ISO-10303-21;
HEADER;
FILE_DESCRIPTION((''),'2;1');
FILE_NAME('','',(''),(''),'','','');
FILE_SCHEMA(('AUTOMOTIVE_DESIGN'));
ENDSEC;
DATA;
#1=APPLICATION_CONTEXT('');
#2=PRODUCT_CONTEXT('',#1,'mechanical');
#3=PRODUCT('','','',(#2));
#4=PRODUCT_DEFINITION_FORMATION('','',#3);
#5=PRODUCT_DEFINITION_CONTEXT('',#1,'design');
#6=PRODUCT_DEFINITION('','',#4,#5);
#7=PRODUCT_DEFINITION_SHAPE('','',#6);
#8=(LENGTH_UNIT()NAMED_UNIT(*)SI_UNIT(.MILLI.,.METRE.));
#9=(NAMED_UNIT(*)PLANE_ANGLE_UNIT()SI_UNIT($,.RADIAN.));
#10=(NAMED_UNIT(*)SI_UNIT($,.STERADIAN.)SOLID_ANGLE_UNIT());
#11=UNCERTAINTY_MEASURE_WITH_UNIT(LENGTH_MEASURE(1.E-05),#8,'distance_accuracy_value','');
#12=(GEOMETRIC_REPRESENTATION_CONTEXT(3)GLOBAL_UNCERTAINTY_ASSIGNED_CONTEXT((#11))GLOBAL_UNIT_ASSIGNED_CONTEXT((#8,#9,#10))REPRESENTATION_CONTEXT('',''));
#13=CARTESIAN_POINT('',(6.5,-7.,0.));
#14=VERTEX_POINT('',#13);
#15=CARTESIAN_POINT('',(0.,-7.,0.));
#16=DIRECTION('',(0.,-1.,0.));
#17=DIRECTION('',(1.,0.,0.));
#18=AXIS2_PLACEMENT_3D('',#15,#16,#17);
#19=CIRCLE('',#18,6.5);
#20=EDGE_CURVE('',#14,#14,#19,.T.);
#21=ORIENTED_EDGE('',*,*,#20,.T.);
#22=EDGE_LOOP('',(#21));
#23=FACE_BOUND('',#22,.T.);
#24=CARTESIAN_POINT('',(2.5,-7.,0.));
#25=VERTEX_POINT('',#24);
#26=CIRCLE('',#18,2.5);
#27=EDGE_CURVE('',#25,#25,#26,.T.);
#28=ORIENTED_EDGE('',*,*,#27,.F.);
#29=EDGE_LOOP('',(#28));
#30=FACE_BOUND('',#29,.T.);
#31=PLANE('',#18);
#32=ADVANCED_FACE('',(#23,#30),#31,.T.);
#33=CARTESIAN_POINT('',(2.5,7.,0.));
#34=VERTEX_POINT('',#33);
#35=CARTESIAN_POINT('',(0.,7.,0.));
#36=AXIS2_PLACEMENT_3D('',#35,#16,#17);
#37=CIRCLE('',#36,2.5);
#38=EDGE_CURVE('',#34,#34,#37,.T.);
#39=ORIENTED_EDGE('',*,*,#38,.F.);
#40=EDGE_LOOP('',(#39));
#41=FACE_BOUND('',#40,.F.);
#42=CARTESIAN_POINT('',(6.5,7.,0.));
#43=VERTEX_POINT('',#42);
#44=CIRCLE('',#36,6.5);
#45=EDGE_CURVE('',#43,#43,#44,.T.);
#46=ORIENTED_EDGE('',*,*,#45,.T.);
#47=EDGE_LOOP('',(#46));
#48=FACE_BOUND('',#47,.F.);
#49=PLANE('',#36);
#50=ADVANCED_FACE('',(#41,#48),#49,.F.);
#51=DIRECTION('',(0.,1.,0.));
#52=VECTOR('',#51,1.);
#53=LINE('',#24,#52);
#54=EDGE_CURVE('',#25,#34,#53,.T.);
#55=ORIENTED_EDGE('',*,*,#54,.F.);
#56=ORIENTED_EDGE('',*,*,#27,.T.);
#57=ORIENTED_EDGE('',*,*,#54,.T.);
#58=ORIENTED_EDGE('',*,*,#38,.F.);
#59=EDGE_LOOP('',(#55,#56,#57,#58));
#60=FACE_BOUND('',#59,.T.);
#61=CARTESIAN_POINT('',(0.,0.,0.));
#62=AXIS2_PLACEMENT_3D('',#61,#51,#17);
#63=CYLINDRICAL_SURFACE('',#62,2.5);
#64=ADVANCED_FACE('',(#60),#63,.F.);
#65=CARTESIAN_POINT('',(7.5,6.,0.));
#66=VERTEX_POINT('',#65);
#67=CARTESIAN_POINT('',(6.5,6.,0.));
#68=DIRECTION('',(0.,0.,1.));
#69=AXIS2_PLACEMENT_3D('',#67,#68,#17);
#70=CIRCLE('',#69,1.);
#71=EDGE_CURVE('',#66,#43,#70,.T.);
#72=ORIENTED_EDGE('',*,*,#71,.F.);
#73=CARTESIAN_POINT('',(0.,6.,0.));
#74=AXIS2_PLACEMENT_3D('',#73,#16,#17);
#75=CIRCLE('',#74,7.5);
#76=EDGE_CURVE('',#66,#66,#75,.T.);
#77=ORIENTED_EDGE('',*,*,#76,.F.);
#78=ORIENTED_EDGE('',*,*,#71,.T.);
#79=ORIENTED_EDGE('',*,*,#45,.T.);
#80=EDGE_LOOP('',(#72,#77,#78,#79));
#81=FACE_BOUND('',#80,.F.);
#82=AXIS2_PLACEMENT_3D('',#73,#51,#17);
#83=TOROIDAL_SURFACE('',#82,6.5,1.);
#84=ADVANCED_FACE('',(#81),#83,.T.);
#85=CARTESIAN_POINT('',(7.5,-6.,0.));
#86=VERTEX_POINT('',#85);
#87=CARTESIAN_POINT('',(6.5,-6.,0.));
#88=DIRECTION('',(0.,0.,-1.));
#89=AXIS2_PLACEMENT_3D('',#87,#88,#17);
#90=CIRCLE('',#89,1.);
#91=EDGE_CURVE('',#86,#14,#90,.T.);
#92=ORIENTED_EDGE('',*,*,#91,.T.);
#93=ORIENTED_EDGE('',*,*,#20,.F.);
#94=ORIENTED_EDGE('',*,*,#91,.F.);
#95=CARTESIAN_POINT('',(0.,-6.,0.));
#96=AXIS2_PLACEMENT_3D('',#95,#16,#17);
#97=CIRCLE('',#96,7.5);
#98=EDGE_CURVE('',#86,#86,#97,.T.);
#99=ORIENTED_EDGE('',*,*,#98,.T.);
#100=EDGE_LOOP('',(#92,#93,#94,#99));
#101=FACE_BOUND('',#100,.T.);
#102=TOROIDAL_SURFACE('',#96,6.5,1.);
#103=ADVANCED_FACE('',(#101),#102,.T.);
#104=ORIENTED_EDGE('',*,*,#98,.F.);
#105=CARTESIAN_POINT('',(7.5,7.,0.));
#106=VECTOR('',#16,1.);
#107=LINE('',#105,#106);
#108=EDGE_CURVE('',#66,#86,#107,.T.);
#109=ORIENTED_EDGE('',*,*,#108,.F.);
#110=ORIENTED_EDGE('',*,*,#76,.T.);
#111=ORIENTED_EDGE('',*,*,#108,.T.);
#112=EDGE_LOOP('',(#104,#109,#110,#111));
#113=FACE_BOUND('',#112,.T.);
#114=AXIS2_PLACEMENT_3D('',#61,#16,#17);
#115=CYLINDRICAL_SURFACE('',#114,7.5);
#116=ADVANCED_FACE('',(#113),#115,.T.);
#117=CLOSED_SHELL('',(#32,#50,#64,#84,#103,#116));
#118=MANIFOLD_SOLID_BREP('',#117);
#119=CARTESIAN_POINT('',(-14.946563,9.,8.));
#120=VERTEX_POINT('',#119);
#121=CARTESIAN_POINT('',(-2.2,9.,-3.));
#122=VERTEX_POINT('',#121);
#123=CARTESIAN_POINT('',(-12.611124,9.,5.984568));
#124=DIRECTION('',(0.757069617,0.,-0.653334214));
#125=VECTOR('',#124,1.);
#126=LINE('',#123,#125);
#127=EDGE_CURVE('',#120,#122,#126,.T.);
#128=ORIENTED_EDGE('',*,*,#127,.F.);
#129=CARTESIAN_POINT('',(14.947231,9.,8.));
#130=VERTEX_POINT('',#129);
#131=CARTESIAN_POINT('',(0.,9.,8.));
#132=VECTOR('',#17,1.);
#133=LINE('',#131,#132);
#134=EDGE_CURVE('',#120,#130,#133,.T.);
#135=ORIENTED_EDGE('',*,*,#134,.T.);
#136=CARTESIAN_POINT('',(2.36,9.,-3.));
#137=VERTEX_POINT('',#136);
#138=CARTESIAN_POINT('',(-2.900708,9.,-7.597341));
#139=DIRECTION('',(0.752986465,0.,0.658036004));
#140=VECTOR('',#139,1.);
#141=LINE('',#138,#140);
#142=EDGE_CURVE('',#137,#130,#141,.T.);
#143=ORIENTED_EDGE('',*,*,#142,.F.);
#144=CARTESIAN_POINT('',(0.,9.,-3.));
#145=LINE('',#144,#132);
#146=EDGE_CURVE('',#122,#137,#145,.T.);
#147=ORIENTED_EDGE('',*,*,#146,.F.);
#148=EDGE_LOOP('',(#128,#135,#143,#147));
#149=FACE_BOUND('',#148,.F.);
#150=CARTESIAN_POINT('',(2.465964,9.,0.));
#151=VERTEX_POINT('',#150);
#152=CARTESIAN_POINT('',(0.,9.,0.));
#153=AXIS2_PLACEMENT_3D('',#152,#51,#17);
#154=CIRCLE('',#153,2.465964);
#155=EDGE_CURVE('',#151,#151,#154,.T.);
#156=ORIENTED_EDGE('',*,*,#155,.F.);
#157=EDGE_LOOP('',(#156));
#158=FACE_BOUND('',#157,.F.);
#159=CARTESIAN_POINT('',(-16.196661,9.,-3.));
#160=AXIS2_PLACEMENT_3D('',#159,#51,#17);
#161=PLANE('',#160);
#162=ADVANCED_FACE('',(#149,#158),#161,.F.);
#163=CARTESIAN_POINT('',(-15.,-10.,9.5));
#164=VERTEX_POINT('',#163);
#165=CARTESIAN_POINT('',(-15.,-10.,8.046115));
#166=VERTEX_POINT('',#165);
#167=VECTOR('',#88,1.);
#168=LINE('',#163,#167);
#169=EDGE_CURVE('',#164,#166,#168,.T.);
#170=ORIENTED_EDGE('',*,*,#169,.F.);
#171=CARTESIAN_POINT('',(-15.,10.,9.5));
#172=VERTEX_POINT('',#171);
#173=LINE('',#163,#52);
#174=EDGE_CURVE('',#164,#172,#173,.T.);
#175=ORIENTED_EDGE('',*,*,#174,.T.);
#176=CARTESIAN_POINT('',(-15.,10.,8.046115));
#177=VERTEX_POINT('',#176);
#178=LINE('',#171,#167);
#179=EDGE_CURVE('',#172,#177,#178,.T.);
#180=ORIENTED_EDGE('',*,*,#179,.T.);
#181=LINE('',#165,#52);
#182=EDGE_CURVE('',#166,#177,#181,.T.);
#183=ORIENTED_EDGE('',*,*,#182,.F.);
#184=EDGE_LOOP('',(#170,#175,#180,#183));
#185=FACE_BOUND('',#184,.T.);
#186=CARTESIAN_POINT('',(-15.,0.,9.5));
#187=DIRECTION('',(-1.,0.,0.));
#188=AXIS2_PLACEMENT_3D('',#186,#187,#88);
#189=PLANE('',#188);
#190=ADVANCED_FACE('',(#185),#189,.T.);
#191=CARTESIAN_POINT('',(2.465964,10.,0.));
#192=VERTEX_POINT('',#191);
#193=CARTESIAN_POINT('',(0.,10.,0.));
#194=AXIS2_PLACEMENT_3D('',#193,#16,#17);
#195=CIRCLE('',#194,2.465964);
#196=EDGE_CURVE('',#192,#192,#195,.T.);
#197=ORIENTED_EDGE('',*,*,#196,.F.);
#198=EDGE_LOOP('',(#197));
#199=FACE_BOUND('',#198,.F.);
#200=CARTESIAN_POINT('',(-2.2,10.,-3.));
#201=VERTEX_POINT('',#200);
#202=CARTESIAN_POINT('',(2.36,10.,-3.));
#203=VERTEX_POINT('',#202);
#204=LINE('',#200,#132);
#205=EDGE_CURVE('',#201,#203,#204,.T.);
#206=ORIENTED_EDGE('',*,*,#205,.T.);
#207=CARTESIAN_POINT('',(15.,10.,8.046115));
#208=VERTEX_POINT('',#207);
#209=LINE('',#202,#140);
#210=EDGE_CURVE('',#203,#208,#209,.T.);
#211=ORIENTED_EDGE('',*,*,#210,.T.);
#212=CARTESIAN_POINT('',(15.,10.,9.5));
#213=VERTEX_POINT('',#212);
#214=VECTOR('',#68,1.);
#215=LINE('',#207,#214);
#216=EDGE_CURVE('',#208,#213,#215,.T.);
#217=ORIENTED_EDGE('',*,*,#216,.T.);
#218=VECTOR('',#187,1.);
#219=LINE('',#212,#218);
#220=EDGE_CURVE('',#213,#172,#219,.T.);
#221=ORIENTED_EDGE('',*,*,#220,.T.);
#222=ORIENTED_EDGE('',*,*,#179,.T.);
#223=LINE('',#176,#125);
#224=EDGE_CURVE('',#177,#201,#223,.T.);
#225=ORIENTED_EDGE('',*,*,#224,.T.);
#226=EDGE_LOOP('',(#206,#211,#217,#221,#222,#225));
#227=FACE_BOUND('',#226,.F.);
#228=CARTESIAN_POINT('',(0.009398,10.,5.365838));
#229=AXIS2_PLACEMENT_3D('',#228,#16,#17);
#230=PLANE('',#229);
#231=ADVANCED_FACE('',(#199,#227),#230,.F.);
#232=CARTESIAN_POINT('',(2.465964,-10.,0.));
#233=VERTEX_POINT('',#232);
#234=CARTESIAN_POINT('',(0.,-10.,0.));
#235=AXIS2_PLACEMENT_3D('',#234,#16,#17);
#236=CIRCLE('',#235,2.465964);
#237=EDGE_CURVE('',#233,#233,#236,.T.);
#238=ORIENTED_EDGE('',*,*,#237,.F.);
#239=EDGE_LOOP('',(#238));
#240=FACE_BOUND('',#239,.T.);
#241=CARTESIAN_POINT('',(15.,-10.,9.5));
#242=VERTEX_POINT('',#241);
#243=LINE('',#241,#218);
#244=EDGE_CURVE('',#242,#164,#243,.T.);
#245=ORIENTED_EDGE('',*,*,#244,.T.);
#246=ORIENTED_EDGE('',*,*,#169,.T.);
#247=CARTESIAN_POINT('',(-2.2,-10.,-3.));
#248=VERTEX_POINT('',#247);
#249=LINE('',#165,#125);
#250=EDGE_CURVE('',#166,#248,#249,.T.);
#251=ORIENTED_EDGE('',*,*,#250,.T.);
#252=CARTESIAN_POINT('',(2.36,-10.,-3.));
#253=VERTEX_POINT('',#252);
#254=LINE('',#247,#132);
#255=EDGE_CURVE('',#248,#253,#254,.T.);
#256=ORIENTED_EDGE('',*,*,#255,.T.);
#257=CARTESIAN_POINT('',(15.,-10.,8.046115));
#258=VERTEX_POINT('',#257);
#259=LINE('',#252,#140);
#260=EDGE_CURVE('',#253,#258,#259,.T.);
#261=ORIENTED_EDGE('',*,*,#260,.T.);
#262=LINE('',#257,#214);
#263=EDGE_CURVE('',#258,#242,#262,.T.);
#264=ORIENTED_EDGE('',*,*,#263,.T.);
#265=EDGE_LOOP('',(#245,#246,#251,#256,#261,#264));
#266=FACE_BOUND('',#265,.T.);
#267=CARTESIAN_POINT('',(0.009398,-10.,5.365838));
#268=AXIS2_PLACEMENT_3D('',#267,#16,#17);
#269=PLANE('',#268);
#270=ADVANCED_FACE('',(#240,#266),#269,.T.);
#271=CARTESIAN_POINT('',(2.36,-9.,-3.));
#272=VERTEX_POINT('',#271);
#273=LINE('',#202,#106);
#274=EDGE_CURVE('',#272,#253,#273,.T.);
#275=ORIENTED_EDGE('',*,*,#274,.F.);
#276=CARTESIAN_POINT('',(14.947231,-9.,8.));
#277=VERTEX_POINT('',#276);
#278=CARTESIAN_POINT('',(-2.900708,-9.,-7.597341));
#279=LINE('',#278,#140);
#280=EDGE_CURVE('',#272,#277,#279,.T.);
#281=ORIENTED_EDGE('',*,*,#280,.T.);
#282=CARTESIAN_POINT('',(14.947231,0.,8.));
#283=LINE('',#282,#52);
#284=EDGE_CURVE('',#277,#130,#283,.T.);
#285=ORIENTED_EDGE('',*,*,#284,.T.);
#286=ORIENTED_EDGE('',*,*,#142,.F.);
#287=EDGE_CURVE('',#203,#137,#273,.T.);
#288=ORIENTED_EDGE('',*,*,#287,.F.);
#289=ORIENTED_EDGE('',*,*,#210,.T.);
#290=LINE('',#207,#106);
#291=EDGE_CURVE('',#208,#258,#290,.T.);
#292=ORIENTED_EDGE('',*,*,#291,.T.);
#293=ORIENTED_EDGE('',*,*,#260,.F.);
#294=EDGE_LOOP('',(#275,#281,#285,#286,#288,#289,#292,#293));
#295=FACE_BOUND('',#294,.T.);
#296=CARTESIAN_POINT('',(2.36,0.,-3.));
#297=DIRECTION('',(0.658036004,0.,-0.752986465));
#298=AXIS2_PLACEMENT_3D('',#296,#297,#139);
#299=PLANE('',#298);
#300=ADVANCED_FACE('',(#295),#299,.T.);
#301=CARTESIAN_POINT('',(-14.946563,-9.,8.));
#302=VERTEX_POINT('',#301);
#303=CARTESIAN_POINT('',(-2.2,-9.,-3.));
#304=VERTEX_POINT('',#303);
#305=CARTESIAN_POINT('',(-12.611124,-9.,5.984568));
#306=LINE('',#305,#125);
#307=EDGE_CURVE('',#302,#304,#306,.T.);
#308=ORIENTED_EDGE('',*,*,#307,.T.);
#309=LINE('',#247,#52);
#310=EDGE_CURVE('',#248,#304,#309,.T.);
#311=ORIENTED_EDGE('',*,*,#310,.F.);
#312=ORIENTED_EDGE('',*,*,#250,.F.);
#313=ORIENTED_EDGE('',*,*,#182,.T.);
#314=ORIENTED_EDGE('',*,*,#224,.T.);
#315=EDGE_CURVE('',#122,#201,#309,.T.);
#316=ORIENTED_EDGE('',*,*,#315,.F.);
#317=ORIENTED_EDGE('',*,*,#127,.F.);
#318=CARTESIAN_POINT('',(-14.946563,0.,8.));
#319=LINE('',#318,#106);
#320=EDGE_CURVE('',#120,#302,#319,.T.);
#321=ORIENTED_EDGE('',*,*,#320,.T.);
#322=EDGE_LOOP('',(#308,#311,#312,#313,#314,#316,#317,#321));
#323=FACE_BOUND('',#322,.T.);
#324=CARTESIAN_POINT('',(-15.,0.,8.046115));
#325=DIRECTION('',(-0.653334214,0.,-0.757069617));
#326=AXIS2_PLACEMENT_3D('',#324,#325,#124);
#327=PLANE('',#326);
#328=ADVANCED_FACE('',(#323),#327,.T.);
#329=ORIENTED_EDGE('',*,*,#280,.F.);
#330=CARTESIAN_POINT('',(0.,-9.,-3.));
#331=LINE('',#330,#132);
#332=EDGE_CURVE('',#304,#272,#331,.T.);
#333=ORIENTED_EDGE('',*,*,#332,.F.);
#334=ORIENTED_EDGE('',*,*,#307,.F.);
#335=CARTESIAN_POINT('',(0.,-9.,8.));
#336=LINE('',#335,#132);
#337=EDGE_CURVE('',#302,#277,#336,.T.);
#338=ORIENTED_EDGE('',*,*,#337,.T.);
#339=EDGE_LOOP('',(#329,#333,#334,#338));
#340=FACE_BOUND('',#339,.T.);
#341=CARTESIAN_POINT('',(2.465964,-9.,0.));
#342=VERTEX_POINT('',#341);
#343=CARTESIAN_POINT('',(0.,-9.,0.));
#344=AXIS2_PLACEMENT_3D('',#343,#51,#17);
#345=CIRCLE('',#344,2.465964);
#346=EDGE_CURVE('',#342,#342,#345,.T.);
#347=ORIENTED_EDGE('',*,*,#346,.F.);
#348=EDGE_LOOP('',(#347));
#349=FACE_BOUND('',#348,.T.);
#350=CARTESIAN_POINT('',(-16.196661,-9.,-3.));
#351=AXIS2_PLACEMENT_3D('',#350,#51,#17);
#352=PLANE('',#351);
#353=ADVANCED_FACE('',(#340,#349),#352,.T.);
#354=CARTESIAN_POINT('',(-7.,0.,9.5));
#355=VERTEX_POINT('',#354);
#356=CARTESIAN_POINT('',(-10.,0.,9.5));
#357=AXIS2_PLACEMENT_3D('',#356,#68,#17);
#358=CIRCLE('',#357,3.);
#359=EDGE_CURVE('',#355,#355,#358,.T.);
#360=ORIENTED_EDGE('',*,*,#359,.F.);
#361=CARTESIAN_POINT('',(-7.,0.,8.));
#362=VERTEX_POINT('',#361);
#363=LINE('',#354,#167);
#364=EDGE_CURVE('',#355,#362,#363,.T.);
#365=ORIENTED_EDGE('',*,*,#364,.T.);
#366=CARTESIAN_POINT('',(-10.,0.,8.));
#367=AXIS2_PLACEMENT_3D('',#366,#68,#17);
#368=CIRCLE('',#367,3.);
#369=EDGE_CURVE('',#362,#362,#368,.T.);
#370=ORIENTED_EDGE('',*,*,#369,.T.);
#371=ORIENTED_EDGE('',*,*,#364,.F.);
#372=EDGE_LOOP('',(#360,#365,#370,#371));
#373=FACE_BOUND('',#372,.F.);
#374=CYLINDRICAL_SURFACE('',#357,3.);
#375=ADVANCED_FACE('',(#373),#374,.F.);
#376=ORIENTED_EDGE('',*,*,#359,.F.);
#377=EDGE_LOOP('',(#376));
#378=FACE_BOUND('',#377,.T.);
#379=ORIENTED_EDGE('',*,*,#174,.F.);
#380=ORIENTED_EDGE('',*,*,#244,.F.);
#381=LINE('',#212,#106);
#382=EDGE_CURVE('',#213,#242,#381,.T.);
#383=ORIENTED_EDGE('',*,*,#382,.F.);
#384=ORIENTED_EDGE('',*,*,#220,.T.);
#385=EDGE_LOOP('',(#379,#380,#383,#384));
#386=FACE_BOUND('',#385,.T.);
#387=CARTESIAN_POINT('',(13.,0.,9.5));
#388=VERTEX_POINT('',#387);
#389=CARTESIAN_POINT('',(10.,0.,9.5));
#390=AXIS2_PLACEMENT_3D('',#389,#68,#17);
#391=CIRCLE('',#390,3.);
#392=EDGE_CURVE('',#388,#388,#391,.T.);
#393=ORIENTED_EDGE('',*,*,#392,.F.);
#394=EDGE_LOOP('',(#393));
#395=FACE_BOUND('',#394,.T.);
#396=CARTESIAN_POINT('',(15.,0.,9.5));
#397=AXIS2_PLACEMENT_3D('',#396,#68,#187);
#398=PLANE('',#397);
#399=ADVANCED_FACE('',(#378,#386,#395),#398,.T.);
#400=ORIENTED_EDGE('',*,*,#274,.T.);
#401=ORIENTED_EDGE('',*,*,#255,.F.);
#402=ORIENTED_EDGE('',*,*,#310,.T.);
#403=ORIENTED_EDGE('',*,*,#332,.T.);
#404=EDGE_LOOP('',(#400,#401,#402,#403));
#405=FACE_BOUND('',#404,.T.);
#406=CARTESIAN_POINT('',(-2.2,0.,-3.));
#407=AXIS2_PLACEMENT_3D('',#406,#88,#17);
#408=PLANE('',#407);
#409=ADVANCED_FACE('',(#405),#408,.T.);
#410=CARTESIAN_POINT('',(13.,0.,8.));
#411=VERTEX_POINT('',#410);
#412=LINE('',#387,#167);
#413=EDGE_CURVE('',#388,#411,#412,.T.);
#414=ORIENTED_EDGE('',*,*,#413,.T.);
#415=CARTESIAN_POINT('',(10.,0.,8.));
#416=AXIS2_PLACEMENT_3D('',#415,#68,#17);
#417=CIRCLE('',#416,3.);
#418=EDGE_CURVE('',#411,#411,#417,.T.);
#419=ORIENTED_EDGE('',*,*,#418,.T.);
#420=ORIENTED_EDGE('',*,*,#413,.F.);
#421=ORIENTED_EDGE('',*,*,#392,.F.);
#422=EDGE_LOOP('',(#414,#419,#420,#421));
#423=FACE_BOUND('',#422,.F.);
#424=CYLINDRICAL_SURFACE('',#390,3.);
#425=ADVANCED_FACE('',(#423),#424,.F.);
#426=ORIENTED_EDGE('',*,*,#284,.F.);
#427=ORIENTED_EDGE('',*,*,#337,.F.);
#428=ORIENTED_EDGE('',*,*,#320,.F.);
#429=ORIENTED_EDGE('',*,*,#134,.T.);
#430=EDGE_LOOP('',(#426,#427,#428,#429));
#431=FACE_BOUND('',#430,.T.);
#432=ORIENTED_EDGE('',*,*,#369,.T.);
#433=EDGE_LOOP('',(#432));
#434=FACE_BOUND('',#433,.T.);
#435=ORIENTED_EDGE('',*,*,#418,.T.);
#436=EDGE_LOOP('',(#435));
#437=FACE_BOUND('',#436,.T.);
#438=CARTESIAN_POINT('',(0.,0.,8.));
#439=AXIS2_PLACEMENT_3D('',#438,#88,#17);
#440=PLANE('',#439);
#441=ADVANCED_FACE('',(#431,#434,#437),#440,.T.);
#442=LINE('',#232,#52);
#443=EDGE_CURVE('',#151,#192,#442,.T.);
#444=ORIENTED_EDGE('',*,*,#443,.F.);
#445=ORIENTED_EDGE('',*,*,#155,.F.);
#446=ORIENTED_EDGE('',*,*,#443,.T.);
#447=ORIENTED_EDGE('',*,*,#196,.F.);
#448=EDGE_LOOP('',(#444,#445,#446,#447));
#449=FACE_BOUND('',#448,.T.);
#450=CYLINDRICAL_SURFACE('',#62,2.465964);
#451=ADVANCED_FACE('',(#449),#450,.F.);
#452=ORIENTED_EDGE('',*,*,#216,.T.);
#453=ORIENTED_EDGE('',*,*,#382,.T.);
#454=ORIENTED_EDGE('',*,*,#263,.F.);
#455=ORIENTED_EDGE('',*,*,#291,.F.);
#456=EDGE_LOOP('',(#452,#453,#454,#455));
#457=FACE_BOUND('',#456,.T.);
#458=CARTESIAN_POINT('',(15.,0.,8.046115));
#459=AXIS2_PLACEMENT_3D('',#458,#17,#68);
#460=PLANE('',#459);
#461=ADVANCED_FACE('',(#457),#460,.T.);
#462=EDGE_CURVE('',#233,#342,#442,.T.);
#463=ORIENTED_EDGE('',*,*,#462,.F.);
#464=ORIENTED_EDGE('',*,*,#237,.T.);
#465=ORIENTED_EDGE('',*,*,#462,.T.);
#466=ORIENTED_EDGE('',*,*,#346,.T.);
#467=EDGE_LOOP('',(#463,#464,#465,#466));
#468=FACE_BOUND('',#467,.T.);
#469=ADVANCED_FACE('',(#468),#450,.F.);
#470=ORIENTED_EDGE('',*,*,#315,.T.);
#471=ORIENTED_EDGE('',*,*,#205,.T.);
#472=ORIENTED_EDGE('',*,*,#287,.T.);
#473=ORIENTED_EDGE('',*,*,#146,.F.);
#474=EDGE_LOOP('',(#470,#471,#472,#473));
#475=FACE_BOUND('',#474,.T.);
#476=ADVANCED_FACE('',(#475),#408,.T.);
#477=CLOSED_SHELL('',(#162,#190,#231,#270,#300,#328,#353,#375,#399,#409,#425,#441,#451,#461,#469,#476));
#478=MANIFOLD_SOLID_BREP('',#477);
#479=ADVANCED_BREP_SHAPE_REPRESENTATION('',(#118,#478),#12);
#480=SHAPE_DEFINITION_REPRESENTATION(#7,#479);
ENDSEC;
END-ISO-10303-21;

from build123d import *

# Parameters (mm, degrees)
F0_R     = 7.5
F0_R_2   = 2.5
F1_DEPTH = 7
F2_R     = 1
F3_R     = 2.4659641978
F4_DEPTH = 10
F5_W     = 32.3933225603
F5_H     = 18
F6_DEPTH = 11
F7_R     = 3
F8_DEPTH = 2


with BuildPart() as f1:
    # F0 (on Front) → F1 (new body, symmetric)
    with BuildSketch(Plane.XZ):
        Circle(F0_R)
        Circle(F0_R_2, mode=Mode.SUBTRACT)
    extrude(amount=F1_DEPTH, both=True)

    # F2
    f2_edges = [f1.edges().sort_by_distance(p)[0] for p in [
        (-7.5, -7, 0),
        (-7.5, 7, 0),
    ]]
    fillet(f2_edges, radius=F2_R)


with BuildPart() as f4:
    # F3 (on Front) → F4 (new body, symmetric)
    with BuildSketch(Plane.XZ):
        Polygon((-2.2, -3), (2.3600001695, -3), (15, 8.0461148574), (15, 9.5), (-15, 9.5), (-15, 8.0461148574), align=None)
        Circle(F3_R, mode=Mode.SUBTRACT)
    extrude(amount=F4_DEPTH, both=True)

    # F5 (on face) → F6 (cut)
    with BuildSketch(Plane(origin=(0, 0, -3), x_dir=(1, 0, 0), z_dir=(0, 0, -1))):
        Rectangle(F5_W, F5_H)
    extrude(amount=-F6_DEPTH, mode=Mode.SUBTRACT)

    # F7 (on face) → F8 (cut)
    with BuildSketch(Plane.XY.offset(9.5)):
        with Locations((-10, 0)):
            Circle(F7_R)
        with Locations((10, 0)):
            Circle(F7_R)
    extrude(amount=-F8_DEPTH, mode=Mode.SUBTRACT)


solid = Compound([f1.part, f4.part])
